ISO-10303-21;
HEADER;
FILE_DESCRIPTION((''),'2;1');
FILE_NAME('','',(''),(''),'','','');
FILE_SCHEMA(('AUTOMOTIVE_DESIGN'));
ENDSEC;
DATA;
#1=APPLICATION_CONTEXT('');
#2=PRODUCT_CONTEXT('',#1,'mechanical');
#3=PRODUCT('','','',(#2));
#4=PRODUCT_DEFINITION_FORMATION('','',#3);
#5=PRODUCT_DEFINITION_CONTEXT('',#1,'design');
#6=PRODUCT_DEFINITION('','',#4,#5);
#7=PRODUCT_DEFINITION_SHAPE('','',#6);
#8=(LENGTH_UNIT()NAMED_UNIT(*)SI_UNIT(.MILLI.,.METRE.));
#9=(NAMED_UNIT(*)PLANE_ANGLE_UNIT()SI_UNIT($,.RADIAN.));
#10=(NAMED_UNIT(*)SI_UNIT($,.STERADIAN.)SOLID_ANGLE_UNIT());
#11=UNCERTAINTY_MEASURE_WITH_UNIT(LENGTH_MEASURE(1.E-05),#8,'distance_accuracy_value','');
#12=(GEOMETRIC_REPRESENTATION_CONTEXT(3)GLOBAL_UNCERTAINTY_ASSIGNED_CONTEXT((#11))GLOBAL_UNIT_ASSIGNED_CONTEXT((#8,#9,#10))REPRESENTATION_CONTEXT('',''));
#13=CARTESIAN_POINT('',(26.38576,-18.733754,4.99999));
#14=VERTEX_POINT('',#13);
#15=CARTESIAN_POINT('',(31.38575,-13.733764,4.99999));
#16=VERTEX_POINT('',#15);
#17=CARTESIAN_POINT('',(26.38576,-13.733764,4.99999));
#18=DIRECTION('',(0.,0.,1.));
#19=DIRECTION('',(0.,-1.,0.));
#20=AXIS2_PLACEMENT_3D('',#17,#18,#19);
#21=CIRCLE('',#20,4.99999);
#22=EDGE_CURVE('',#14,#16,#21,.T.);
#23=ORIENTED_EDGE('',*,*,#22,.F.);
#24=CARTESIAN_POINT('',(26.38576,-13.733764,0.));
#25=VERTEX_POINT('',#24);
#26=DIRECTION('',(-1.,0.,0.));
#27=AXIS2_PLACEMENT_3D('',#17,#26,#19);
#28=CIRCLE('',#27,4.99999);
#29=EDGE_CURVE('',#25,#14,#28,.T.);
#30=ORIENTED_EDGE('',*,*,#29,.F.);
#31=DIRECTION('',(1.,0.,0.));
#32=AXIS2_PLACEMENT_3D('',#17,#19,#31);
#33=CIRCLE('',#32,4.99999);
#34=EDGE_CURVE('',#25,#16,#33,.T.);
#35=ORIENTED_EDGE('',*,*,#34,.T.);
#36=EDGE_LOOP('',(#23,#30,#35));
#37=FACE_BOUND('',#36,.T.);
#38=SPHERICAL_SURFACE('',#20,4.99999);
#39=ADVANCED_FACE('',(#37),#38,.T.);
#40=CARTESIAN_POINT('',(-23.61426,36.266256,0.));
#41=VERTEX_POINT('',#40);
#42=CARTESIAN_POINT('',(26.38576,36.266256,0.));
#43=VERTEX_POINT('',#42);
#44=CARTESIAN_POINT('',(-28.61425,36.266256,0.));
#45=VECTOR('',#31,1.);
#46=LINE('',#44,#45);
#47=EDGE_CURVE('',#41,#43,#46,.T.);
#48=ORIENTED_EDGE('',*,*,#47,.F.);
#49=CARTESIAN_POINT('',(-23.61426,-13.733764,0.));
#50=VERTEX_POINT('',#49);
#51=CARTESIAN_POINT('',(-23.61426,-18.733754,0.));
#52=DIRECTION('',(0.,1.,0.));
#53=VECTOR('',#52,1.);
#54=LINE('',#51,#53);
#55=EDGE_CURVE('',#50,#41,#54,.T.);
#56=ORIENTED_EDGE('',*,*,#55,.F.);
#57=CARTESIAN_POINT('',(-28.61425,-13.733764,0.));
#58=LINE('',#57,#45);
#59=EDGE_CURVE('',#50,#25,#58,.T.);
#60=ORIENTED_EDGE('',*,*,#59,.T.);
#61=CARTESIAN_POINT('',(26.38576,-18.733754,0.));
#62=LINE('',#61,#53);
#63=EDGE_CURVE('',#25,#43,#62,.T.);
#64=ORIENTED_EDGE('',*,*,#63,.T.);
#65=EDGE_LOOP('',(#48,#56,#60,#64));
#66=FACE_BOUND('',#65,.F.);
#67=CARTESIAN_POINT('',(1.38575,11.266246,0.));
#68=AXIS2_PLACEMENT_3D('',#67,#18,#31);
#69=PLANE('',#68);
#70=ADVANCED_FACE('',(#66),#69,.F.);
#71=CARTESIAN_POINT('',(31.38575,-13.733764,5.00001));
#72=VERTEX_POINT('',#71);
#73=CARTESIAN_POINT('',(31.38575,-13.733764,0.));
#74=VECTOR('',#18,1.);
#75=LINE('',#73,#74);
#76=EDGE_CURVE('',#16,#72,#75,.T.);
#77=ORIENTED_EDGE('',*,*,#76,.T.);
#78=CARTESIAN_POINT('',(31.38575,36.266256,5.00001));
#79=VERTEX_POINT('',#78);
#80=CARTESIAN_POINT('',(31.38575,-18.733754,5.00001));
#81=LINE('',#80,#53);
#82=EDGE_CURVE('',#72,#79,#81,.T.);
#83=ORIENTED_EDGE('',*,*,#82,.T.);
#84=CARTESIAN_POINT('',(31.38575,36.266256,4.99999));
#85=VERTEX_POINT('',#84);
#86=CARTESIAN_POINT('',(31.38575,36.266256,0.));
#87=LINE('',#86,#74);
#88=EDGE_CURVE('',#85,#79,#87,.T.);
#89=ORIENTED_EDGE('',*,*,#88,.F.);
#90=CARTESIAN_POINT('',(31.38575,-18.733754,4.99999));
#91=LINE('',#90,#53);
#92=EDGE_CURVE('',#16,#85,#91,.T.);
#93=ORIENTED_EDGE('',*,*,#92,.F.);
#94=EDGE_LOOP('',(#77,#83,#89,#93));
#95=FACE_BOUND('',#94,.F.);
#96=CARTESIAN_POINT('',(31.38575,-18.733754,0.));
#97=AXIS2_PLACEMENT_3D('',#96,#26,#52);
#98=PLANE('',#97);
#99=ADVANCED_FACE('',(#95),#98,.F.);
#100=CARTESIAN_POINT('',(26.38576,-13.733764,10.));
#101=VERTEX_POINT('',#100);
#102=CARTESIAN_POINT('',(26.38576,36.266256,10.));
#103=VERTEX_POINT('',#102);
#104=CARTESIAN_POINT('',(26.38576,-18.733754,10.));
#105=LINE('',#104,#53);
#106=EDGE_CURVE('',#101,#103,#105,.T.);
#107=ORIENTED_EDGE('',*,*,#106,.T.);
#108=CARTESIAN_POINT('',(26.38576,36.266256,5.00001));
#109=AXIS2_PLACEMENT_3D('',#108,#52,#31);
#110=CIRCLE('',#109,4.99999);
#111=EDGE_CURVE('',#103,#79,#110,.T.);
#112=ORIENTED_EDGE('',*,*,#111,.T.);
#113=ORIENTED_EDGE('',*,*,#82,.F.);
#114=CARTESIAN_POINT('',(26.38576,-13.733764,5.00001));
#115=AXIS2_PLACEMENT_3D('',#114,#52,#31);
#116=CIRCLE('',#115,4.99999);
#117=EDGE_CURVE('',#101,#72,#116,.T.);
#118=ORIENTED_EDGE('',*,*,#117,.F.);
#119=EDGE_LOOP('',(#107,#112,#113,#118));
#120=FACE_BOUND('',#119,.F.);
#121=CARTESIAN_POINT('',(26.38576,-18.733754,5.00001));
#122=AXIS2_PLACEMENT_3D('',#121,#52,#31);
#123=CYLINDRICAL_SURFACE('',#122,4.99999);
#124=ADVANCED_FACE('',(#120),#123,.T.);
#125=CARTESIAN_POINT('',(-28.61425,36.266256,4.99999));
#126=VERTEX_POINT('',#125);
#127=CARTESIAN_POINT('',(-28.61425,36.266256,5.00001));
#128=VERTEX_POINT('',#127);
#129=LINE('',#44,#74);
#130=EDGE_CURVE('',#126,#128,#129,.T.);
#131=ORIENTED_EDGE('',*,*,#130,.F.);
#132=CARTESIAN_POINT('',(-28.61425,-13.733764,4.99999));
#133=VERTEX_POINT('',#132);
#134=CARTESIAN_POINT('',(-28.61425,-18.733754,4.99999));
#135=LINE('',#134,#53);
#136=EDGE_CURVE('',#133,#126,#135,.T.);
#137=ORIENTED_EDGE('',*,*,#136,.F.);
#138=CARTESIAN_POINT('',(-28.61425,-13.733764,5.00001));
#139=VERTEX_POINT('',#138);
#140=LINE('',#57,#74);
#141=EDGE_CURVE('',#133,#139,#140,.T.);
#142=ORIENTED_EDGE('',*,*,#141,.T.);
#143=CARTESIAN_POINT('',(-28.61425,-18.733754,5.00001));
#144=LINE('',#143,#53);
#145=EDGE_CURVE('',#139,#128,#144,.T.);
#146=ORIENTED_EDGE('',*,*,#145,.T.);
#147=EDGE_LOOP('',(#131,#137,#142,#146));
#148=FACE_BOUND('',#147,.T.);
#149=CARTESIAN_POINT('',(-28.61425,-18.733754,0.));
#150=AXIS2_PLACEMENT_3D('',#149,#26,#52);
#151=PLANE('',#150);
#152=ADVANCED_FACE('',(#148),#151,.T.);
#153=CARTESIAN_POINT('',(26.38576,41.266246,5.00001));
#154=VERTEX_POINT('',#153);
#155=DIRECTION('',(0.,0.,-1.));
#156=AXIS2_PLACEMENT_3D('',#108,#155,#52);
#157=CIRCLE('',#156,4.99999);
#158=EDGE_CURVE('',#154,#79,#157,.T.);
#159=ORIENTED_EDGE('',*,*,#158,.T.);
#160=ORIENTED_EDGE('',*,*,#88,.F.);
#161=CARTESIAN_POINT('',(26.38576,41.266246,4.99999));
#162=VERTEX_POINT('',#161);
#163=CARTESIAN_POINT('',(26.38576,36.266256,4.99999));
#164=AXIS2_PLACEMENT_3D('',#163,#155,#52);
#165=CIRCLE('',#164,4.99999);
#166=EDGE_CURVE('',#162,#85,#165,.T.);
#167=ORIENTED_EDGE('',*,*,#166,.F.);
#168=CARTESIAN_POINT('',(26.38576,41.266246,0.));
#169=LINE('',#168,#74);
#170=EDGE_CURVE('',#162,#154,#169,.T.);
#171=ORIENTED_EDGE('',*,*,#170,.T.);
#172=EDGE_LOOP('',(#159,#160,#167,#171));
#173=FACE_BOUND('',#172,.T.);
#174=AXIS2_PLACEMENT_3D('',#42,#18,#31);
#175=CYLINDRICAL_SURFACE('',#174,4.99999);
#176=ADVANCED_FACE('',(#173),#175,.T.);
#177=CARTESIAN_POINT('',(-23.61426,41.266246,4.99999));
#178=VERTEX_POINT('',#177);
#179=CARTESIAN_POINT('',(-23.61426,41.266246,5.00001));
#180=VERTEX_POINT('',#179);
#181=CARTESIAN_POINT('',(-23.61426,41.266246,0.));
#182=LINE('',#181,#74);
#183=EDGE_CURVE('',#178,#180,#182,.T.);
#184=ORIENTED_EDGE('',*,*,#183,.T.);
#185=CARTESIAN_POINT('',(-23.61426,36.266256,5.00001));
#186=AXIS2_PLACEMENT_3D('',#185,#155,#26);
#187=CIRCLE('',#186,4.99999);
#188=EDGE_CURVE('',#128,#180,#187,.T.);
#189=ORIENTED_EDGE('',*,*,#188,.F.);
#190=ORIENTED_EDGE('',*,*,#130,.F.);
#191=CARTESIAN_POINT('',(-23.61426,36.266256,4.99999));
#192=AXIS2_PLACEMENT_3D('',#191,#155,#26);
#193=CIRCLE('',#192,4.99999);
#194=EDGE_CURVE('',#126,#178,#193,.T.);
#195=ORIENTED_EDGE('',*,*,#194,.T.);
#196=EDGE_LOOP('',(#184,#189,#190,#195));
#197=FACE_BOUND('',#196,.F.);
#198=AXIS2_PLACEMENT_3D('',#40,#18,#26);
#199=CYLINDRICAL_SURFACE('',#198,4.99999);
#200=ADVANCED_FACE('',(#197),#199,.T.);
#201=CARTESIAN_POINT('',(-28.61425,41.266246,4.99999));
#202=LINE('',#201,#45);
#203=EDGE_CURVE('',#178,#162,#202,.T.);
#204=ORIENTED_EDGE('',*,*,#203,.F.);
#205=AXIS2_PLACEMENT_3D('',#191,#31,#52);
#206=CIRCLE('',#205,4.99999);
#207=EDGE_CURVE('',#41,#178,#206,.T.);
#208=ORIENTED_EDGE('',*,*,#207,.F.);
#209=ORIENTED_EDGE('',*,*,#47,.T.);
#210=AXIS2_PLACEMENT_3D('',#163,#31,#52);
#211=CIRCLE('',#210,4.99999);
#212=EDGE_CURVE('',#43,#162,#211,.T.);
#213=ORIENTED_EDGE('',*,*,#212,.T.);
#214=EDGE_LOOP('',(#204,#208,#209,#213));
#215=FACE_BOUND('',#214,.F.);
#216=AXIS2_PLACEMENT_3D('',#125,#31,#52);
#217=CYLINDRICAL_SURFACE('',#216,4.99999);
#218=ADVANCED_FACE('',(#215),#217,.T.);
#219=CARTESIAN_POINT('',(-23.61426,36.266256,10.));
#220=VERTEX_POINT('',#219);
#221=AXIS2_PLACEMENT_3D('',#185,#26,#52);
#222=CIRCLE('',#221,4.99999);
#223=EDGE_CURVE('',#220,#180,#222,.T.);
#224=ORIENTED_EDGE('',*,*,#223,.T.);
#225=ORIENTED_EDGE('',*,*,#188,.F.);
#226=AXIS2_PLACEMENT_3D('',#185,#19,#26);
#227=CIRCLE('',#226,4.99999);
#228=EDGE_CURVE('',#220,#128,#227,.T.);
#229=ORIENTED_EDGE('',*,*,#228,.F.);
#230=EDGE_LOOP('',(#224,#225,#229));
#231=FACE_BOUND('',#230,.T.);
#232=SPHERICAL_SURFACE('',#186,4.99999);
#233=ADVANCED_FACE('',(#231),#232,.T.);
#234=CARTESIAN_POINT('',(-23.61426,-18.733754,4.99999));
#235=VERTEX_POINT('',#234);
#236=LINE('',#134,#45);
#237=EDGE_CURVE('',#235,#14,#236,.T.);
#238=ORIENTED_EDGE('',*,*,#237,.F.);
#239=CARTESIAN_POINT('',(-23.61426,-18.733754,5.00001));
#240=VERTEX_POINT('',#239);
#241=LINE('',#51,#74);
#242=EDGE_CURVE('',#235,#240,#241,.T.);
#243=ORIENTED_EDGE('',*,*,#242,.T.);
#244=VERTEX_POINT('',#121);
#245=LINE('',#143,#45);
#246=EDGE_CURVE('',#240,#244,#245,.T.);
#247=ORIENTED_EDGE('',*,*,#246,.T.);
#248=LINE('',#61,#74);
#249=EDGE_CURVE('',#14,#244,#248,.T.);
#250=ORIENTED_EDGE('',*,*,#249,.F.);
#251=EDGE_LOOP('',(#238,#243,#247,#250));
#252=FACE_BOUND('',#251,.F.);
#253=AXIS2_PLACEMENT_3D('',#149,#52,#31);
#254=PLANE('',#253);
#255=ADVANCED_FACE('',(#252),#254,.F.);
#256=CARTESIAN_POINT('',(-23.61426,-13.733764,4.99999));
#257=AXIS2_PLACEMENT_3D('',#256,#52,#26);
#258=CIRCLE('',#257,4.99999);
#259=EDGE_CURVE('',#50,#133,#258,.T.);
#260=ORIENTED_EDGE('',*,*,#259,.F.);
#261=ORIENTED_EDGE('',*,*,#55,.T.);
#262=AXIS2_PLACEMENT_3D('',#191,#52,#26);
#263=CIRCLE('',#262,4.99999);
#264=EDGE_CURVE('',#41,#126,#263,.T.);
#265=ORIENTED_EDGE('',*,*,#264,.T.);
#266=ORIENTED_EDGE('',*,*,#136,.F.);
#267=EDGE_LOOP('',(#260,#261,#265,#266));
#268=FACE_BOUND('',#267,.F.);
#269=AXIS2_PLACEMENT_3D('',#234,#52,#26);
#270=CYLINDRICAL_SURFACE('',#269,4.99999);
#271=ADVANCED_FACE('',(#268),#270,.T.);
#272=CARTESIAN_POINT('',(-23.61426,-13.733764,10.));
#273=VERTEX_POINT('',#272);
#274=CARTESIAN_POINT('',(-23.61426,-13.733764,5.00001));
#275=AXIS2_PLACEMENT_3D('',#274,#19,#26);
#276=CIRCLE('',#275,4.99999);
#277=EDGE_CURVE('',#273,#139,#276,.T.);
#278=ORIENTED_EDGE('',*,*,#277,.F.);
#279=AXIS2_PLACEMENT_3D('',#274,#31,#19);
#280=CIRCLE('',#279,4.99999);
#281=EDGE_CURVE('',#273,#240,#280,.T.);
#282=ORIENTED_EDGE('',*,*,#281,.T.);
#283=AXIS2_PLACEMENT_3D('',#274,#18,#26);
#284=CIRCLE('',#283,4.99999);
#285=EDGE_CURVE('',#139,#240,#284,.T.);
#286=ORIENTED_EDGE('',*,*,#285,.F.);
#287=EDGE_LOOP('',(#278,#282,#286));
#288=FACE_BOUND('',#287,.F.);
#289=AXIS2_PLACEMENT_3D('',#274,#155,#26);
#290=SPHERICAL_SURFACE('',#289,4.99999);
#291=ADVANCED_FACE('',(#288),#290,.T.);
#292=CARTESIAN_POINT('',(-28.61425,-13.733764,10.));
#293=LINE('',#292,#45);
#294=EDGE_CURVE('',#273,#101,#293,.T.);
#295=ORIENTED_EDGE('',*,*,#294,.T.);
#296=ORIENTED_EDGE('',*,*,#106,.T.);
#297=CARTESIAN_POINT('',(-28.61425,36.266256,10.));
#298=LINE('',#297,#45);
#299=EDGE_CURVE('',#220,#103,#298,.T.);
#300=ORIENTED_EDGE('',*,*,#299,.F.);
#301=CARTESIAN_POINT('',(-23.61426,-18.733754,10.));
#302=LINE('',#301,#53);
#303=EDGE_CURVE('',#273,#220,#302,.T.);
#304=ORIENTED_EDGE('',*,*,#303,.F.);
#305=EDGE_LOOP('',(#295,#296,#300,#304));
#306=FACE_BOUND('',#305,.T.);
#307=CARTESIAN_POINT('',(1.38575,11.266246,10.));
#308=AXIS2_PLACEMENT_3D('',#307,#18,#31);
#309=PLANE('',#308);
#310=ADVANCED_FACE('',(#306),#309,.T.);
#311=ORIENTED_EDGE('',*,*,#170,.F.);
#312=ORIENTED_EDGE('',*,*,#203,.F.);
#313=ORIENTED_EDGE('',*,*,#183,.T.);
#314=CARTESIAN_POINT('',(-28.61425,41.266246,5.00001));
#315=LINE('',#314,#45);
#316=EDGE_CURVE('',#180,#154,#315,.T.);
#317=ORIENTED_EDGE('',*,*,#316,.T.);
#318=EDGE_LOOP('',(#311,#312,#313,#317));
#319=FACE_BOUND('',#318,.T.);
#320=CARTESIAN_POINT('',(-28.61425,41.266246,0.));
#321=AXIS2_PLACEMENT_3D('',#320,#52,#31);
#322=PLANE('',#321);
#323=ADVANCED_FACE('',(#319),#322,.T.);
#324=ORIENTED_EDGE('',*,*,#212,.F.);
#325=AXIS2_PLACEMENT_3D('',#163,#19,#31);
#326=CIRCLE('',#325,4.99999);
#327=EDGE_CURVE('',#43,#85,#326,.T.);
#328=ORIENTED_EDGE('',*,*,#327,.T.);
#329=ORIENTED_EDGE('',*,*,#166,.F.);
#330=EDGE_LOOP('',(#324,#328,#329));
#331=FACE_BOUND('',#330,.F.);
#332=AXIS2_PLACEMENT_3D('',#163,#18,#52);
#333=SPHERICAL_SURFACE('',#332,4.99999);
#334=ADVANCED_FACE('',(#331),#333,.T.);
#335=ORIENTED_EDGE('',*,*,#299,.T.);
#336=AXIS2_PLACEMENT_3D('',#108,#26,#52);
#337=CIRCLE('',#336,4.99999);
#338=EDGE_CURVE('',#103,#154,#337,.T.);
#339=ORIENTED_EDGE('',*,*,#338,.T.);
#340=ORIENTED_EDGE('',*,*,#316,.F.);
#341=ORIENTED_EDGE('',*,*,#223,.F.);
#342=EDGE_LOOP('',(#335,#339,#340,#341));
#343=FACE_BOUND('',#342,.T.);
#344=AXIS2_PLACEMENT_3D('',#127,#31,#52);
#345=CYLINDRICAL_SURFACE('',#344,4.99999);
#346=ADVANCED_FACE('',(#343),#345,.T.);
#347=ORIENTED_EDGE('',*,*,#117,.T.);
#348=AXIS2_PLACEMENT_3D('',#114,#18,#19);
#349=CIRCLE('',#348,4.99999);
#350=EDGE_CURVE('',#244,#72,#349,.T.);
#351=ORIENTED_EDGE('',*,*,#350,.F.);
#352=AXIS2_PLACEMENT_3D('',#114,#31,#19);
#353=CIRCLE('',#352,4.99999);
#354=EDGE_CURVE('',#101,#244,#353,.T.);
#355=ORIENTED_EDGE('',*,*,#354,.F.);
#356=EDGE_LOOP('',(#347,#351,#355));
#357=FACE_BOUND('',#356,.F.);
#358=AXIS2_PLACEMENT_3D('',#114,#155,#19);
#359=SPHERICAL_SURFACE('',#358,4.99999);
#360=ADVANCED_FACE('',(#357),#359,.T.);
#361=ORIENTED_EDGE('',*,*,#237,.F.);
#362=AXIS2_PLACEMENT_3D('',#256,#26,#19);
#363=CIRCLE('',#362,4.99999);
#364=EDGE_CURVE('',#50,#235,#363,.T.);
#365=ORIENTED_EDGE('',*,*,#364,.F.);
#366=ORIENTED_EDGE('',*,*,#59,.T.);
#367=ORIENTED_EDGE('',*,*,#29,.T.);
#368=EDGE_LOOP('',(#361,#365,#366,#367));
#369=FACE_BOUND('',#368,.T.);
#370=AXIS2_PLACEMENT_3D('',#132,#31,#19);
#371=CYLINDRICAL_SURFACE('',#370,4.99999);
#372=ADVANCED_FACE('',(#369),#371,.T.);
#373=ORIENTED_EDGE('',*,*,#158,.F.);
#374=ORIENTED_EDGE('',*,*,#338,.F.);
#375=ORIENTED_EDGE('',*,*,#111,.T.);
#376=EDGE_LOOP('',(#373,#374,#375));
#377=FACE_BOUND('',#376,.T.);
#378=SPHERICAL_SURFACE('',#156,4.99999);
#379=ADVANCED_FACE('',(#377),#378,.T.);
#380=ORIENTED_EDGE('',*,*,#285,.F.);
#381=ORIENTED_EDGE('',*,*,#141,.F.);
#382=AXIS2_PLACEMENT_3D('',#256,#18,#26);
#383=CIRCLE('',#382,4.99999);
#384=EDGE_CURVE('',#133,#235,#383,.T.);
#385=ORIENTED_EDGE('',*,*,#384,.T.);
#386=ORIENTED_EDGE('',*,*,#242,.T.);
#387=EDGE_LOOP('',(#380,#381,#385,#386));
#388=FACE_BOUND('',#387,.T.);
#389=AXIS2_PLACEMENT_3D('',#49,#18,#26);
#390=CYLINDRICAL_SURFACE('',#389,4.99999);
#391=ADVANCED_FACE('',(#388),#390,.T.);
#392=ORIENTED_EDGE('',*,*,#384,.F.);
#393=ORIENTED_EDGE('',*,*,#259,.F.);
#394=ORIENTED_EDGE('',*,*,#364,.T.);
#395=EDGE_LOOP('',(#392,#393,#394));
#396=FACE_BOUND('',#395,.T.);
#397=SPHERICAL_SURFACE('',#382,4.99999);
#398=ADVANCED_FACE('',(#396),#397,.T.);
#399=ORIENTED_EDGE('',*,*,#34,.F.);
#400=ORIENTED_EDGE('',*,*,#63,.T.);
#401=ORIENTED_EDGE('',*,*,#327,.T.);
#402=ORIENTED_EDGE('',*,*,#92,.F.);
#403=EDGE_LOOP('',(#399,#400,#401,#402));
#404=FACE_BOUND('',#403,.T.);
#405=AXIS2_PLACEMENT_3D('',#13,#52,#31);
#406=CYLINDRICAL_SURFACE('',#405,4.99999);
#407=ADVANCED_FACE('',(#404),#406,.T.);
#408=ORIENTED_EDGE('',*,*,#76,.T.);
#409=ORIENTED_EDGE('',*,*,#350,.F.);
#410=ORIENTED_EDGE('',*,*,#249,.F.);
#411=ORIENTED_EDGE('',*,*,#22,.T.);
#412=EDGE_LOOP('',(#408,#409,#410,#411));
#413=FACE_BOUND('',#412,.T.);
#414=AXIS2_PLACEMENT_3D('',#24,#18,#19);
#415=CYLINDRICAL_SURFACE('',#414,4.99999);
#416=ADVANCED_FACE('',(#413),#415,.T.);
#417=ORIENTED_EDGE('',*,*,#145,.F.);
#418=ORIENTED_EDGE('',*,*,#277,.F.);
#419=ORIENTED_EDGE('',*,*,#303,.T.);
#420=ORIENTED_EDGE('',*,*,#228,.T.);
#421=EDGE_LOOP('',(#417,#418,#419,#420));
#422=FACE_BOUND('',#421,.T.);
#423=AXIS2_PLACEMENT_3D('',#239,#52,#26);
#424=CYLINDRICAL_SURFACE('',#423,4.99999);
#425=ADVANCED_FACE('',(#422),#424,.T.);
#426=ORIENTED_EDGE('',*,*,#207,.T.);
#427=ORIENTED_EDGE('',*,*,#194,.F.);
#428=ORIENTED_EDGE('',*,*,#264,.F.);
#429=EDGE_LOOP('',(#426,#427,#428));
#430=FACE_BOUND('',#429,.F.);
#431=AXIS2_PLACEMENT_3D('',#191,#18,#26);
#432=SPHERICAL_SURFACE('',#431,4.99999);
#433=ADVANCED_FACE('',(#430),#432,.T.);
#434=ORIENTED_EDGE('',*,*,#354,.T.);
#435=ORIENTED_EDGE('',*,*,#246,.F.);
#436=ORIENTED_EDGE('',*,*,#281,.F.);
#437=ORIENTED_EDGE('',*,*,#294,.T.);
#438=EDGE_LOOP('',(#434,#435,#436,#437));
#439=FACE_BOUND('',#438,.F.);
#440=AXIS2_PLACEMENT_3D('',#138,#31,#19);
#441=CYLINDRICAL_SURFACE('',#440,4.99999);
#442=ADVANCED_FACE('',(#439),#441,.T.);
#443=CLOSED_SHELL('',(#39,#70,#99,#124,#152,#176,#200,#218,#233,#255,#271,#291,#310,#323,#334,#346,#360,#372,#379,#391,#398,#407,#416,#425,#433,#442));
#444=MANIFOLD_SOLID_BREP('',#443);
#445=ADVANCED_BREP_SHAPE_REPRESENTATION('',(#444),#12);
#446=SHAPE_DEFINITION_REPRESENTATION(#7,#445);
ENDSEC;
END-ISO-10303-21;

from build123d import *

# Parameters (mm, degrees)
F0_W     = 60
F0_H     = 60
F1_DEPTH = 10
F2_R     = 4.99999


# Not quite as in the source:
# - a fillet or chamfer is up to 0.001 mm smaller than in the source, because OpenCascade refuses the exact size


with BuildPart() as f1:
    # F0 (on Top) → F1 (new body)
    with BuildSketch(Plane.XY):
        with Locations((1.3857496455, 11.266246149)):
            Rectangle(F0_W, F0_H)
    extrude(amount=F1_DEPTH)

    # F2 (radius 5 in the source; OpenCascade refuses exactly that, so slightly less here)
    f2_edges = [f1.edges().sort_by_distance(p)[0] for p in [
        (-28.61425, 41.266246, 5),
        (-28.61425, -18.733754, 5),
        (-28.61425, 11.266246, 0),
        (-28.61425, 11.266246, 10),
        (31.38575, 41.266246, 5),
        (1.38575, 41.266246, 0),
        (1.38575, 41.266246, 10),
        (31.38575, -18.733754, 5),
        (1.38575, -18.733754, 0),
        (1.38575, -18.733754, 10),
        (31.38575, 11.266246, 0),
        (31.38575, 11.266246, 10),
    ]]
    fillet(f2_edges, radius=F2_R)


solid = f1.part
